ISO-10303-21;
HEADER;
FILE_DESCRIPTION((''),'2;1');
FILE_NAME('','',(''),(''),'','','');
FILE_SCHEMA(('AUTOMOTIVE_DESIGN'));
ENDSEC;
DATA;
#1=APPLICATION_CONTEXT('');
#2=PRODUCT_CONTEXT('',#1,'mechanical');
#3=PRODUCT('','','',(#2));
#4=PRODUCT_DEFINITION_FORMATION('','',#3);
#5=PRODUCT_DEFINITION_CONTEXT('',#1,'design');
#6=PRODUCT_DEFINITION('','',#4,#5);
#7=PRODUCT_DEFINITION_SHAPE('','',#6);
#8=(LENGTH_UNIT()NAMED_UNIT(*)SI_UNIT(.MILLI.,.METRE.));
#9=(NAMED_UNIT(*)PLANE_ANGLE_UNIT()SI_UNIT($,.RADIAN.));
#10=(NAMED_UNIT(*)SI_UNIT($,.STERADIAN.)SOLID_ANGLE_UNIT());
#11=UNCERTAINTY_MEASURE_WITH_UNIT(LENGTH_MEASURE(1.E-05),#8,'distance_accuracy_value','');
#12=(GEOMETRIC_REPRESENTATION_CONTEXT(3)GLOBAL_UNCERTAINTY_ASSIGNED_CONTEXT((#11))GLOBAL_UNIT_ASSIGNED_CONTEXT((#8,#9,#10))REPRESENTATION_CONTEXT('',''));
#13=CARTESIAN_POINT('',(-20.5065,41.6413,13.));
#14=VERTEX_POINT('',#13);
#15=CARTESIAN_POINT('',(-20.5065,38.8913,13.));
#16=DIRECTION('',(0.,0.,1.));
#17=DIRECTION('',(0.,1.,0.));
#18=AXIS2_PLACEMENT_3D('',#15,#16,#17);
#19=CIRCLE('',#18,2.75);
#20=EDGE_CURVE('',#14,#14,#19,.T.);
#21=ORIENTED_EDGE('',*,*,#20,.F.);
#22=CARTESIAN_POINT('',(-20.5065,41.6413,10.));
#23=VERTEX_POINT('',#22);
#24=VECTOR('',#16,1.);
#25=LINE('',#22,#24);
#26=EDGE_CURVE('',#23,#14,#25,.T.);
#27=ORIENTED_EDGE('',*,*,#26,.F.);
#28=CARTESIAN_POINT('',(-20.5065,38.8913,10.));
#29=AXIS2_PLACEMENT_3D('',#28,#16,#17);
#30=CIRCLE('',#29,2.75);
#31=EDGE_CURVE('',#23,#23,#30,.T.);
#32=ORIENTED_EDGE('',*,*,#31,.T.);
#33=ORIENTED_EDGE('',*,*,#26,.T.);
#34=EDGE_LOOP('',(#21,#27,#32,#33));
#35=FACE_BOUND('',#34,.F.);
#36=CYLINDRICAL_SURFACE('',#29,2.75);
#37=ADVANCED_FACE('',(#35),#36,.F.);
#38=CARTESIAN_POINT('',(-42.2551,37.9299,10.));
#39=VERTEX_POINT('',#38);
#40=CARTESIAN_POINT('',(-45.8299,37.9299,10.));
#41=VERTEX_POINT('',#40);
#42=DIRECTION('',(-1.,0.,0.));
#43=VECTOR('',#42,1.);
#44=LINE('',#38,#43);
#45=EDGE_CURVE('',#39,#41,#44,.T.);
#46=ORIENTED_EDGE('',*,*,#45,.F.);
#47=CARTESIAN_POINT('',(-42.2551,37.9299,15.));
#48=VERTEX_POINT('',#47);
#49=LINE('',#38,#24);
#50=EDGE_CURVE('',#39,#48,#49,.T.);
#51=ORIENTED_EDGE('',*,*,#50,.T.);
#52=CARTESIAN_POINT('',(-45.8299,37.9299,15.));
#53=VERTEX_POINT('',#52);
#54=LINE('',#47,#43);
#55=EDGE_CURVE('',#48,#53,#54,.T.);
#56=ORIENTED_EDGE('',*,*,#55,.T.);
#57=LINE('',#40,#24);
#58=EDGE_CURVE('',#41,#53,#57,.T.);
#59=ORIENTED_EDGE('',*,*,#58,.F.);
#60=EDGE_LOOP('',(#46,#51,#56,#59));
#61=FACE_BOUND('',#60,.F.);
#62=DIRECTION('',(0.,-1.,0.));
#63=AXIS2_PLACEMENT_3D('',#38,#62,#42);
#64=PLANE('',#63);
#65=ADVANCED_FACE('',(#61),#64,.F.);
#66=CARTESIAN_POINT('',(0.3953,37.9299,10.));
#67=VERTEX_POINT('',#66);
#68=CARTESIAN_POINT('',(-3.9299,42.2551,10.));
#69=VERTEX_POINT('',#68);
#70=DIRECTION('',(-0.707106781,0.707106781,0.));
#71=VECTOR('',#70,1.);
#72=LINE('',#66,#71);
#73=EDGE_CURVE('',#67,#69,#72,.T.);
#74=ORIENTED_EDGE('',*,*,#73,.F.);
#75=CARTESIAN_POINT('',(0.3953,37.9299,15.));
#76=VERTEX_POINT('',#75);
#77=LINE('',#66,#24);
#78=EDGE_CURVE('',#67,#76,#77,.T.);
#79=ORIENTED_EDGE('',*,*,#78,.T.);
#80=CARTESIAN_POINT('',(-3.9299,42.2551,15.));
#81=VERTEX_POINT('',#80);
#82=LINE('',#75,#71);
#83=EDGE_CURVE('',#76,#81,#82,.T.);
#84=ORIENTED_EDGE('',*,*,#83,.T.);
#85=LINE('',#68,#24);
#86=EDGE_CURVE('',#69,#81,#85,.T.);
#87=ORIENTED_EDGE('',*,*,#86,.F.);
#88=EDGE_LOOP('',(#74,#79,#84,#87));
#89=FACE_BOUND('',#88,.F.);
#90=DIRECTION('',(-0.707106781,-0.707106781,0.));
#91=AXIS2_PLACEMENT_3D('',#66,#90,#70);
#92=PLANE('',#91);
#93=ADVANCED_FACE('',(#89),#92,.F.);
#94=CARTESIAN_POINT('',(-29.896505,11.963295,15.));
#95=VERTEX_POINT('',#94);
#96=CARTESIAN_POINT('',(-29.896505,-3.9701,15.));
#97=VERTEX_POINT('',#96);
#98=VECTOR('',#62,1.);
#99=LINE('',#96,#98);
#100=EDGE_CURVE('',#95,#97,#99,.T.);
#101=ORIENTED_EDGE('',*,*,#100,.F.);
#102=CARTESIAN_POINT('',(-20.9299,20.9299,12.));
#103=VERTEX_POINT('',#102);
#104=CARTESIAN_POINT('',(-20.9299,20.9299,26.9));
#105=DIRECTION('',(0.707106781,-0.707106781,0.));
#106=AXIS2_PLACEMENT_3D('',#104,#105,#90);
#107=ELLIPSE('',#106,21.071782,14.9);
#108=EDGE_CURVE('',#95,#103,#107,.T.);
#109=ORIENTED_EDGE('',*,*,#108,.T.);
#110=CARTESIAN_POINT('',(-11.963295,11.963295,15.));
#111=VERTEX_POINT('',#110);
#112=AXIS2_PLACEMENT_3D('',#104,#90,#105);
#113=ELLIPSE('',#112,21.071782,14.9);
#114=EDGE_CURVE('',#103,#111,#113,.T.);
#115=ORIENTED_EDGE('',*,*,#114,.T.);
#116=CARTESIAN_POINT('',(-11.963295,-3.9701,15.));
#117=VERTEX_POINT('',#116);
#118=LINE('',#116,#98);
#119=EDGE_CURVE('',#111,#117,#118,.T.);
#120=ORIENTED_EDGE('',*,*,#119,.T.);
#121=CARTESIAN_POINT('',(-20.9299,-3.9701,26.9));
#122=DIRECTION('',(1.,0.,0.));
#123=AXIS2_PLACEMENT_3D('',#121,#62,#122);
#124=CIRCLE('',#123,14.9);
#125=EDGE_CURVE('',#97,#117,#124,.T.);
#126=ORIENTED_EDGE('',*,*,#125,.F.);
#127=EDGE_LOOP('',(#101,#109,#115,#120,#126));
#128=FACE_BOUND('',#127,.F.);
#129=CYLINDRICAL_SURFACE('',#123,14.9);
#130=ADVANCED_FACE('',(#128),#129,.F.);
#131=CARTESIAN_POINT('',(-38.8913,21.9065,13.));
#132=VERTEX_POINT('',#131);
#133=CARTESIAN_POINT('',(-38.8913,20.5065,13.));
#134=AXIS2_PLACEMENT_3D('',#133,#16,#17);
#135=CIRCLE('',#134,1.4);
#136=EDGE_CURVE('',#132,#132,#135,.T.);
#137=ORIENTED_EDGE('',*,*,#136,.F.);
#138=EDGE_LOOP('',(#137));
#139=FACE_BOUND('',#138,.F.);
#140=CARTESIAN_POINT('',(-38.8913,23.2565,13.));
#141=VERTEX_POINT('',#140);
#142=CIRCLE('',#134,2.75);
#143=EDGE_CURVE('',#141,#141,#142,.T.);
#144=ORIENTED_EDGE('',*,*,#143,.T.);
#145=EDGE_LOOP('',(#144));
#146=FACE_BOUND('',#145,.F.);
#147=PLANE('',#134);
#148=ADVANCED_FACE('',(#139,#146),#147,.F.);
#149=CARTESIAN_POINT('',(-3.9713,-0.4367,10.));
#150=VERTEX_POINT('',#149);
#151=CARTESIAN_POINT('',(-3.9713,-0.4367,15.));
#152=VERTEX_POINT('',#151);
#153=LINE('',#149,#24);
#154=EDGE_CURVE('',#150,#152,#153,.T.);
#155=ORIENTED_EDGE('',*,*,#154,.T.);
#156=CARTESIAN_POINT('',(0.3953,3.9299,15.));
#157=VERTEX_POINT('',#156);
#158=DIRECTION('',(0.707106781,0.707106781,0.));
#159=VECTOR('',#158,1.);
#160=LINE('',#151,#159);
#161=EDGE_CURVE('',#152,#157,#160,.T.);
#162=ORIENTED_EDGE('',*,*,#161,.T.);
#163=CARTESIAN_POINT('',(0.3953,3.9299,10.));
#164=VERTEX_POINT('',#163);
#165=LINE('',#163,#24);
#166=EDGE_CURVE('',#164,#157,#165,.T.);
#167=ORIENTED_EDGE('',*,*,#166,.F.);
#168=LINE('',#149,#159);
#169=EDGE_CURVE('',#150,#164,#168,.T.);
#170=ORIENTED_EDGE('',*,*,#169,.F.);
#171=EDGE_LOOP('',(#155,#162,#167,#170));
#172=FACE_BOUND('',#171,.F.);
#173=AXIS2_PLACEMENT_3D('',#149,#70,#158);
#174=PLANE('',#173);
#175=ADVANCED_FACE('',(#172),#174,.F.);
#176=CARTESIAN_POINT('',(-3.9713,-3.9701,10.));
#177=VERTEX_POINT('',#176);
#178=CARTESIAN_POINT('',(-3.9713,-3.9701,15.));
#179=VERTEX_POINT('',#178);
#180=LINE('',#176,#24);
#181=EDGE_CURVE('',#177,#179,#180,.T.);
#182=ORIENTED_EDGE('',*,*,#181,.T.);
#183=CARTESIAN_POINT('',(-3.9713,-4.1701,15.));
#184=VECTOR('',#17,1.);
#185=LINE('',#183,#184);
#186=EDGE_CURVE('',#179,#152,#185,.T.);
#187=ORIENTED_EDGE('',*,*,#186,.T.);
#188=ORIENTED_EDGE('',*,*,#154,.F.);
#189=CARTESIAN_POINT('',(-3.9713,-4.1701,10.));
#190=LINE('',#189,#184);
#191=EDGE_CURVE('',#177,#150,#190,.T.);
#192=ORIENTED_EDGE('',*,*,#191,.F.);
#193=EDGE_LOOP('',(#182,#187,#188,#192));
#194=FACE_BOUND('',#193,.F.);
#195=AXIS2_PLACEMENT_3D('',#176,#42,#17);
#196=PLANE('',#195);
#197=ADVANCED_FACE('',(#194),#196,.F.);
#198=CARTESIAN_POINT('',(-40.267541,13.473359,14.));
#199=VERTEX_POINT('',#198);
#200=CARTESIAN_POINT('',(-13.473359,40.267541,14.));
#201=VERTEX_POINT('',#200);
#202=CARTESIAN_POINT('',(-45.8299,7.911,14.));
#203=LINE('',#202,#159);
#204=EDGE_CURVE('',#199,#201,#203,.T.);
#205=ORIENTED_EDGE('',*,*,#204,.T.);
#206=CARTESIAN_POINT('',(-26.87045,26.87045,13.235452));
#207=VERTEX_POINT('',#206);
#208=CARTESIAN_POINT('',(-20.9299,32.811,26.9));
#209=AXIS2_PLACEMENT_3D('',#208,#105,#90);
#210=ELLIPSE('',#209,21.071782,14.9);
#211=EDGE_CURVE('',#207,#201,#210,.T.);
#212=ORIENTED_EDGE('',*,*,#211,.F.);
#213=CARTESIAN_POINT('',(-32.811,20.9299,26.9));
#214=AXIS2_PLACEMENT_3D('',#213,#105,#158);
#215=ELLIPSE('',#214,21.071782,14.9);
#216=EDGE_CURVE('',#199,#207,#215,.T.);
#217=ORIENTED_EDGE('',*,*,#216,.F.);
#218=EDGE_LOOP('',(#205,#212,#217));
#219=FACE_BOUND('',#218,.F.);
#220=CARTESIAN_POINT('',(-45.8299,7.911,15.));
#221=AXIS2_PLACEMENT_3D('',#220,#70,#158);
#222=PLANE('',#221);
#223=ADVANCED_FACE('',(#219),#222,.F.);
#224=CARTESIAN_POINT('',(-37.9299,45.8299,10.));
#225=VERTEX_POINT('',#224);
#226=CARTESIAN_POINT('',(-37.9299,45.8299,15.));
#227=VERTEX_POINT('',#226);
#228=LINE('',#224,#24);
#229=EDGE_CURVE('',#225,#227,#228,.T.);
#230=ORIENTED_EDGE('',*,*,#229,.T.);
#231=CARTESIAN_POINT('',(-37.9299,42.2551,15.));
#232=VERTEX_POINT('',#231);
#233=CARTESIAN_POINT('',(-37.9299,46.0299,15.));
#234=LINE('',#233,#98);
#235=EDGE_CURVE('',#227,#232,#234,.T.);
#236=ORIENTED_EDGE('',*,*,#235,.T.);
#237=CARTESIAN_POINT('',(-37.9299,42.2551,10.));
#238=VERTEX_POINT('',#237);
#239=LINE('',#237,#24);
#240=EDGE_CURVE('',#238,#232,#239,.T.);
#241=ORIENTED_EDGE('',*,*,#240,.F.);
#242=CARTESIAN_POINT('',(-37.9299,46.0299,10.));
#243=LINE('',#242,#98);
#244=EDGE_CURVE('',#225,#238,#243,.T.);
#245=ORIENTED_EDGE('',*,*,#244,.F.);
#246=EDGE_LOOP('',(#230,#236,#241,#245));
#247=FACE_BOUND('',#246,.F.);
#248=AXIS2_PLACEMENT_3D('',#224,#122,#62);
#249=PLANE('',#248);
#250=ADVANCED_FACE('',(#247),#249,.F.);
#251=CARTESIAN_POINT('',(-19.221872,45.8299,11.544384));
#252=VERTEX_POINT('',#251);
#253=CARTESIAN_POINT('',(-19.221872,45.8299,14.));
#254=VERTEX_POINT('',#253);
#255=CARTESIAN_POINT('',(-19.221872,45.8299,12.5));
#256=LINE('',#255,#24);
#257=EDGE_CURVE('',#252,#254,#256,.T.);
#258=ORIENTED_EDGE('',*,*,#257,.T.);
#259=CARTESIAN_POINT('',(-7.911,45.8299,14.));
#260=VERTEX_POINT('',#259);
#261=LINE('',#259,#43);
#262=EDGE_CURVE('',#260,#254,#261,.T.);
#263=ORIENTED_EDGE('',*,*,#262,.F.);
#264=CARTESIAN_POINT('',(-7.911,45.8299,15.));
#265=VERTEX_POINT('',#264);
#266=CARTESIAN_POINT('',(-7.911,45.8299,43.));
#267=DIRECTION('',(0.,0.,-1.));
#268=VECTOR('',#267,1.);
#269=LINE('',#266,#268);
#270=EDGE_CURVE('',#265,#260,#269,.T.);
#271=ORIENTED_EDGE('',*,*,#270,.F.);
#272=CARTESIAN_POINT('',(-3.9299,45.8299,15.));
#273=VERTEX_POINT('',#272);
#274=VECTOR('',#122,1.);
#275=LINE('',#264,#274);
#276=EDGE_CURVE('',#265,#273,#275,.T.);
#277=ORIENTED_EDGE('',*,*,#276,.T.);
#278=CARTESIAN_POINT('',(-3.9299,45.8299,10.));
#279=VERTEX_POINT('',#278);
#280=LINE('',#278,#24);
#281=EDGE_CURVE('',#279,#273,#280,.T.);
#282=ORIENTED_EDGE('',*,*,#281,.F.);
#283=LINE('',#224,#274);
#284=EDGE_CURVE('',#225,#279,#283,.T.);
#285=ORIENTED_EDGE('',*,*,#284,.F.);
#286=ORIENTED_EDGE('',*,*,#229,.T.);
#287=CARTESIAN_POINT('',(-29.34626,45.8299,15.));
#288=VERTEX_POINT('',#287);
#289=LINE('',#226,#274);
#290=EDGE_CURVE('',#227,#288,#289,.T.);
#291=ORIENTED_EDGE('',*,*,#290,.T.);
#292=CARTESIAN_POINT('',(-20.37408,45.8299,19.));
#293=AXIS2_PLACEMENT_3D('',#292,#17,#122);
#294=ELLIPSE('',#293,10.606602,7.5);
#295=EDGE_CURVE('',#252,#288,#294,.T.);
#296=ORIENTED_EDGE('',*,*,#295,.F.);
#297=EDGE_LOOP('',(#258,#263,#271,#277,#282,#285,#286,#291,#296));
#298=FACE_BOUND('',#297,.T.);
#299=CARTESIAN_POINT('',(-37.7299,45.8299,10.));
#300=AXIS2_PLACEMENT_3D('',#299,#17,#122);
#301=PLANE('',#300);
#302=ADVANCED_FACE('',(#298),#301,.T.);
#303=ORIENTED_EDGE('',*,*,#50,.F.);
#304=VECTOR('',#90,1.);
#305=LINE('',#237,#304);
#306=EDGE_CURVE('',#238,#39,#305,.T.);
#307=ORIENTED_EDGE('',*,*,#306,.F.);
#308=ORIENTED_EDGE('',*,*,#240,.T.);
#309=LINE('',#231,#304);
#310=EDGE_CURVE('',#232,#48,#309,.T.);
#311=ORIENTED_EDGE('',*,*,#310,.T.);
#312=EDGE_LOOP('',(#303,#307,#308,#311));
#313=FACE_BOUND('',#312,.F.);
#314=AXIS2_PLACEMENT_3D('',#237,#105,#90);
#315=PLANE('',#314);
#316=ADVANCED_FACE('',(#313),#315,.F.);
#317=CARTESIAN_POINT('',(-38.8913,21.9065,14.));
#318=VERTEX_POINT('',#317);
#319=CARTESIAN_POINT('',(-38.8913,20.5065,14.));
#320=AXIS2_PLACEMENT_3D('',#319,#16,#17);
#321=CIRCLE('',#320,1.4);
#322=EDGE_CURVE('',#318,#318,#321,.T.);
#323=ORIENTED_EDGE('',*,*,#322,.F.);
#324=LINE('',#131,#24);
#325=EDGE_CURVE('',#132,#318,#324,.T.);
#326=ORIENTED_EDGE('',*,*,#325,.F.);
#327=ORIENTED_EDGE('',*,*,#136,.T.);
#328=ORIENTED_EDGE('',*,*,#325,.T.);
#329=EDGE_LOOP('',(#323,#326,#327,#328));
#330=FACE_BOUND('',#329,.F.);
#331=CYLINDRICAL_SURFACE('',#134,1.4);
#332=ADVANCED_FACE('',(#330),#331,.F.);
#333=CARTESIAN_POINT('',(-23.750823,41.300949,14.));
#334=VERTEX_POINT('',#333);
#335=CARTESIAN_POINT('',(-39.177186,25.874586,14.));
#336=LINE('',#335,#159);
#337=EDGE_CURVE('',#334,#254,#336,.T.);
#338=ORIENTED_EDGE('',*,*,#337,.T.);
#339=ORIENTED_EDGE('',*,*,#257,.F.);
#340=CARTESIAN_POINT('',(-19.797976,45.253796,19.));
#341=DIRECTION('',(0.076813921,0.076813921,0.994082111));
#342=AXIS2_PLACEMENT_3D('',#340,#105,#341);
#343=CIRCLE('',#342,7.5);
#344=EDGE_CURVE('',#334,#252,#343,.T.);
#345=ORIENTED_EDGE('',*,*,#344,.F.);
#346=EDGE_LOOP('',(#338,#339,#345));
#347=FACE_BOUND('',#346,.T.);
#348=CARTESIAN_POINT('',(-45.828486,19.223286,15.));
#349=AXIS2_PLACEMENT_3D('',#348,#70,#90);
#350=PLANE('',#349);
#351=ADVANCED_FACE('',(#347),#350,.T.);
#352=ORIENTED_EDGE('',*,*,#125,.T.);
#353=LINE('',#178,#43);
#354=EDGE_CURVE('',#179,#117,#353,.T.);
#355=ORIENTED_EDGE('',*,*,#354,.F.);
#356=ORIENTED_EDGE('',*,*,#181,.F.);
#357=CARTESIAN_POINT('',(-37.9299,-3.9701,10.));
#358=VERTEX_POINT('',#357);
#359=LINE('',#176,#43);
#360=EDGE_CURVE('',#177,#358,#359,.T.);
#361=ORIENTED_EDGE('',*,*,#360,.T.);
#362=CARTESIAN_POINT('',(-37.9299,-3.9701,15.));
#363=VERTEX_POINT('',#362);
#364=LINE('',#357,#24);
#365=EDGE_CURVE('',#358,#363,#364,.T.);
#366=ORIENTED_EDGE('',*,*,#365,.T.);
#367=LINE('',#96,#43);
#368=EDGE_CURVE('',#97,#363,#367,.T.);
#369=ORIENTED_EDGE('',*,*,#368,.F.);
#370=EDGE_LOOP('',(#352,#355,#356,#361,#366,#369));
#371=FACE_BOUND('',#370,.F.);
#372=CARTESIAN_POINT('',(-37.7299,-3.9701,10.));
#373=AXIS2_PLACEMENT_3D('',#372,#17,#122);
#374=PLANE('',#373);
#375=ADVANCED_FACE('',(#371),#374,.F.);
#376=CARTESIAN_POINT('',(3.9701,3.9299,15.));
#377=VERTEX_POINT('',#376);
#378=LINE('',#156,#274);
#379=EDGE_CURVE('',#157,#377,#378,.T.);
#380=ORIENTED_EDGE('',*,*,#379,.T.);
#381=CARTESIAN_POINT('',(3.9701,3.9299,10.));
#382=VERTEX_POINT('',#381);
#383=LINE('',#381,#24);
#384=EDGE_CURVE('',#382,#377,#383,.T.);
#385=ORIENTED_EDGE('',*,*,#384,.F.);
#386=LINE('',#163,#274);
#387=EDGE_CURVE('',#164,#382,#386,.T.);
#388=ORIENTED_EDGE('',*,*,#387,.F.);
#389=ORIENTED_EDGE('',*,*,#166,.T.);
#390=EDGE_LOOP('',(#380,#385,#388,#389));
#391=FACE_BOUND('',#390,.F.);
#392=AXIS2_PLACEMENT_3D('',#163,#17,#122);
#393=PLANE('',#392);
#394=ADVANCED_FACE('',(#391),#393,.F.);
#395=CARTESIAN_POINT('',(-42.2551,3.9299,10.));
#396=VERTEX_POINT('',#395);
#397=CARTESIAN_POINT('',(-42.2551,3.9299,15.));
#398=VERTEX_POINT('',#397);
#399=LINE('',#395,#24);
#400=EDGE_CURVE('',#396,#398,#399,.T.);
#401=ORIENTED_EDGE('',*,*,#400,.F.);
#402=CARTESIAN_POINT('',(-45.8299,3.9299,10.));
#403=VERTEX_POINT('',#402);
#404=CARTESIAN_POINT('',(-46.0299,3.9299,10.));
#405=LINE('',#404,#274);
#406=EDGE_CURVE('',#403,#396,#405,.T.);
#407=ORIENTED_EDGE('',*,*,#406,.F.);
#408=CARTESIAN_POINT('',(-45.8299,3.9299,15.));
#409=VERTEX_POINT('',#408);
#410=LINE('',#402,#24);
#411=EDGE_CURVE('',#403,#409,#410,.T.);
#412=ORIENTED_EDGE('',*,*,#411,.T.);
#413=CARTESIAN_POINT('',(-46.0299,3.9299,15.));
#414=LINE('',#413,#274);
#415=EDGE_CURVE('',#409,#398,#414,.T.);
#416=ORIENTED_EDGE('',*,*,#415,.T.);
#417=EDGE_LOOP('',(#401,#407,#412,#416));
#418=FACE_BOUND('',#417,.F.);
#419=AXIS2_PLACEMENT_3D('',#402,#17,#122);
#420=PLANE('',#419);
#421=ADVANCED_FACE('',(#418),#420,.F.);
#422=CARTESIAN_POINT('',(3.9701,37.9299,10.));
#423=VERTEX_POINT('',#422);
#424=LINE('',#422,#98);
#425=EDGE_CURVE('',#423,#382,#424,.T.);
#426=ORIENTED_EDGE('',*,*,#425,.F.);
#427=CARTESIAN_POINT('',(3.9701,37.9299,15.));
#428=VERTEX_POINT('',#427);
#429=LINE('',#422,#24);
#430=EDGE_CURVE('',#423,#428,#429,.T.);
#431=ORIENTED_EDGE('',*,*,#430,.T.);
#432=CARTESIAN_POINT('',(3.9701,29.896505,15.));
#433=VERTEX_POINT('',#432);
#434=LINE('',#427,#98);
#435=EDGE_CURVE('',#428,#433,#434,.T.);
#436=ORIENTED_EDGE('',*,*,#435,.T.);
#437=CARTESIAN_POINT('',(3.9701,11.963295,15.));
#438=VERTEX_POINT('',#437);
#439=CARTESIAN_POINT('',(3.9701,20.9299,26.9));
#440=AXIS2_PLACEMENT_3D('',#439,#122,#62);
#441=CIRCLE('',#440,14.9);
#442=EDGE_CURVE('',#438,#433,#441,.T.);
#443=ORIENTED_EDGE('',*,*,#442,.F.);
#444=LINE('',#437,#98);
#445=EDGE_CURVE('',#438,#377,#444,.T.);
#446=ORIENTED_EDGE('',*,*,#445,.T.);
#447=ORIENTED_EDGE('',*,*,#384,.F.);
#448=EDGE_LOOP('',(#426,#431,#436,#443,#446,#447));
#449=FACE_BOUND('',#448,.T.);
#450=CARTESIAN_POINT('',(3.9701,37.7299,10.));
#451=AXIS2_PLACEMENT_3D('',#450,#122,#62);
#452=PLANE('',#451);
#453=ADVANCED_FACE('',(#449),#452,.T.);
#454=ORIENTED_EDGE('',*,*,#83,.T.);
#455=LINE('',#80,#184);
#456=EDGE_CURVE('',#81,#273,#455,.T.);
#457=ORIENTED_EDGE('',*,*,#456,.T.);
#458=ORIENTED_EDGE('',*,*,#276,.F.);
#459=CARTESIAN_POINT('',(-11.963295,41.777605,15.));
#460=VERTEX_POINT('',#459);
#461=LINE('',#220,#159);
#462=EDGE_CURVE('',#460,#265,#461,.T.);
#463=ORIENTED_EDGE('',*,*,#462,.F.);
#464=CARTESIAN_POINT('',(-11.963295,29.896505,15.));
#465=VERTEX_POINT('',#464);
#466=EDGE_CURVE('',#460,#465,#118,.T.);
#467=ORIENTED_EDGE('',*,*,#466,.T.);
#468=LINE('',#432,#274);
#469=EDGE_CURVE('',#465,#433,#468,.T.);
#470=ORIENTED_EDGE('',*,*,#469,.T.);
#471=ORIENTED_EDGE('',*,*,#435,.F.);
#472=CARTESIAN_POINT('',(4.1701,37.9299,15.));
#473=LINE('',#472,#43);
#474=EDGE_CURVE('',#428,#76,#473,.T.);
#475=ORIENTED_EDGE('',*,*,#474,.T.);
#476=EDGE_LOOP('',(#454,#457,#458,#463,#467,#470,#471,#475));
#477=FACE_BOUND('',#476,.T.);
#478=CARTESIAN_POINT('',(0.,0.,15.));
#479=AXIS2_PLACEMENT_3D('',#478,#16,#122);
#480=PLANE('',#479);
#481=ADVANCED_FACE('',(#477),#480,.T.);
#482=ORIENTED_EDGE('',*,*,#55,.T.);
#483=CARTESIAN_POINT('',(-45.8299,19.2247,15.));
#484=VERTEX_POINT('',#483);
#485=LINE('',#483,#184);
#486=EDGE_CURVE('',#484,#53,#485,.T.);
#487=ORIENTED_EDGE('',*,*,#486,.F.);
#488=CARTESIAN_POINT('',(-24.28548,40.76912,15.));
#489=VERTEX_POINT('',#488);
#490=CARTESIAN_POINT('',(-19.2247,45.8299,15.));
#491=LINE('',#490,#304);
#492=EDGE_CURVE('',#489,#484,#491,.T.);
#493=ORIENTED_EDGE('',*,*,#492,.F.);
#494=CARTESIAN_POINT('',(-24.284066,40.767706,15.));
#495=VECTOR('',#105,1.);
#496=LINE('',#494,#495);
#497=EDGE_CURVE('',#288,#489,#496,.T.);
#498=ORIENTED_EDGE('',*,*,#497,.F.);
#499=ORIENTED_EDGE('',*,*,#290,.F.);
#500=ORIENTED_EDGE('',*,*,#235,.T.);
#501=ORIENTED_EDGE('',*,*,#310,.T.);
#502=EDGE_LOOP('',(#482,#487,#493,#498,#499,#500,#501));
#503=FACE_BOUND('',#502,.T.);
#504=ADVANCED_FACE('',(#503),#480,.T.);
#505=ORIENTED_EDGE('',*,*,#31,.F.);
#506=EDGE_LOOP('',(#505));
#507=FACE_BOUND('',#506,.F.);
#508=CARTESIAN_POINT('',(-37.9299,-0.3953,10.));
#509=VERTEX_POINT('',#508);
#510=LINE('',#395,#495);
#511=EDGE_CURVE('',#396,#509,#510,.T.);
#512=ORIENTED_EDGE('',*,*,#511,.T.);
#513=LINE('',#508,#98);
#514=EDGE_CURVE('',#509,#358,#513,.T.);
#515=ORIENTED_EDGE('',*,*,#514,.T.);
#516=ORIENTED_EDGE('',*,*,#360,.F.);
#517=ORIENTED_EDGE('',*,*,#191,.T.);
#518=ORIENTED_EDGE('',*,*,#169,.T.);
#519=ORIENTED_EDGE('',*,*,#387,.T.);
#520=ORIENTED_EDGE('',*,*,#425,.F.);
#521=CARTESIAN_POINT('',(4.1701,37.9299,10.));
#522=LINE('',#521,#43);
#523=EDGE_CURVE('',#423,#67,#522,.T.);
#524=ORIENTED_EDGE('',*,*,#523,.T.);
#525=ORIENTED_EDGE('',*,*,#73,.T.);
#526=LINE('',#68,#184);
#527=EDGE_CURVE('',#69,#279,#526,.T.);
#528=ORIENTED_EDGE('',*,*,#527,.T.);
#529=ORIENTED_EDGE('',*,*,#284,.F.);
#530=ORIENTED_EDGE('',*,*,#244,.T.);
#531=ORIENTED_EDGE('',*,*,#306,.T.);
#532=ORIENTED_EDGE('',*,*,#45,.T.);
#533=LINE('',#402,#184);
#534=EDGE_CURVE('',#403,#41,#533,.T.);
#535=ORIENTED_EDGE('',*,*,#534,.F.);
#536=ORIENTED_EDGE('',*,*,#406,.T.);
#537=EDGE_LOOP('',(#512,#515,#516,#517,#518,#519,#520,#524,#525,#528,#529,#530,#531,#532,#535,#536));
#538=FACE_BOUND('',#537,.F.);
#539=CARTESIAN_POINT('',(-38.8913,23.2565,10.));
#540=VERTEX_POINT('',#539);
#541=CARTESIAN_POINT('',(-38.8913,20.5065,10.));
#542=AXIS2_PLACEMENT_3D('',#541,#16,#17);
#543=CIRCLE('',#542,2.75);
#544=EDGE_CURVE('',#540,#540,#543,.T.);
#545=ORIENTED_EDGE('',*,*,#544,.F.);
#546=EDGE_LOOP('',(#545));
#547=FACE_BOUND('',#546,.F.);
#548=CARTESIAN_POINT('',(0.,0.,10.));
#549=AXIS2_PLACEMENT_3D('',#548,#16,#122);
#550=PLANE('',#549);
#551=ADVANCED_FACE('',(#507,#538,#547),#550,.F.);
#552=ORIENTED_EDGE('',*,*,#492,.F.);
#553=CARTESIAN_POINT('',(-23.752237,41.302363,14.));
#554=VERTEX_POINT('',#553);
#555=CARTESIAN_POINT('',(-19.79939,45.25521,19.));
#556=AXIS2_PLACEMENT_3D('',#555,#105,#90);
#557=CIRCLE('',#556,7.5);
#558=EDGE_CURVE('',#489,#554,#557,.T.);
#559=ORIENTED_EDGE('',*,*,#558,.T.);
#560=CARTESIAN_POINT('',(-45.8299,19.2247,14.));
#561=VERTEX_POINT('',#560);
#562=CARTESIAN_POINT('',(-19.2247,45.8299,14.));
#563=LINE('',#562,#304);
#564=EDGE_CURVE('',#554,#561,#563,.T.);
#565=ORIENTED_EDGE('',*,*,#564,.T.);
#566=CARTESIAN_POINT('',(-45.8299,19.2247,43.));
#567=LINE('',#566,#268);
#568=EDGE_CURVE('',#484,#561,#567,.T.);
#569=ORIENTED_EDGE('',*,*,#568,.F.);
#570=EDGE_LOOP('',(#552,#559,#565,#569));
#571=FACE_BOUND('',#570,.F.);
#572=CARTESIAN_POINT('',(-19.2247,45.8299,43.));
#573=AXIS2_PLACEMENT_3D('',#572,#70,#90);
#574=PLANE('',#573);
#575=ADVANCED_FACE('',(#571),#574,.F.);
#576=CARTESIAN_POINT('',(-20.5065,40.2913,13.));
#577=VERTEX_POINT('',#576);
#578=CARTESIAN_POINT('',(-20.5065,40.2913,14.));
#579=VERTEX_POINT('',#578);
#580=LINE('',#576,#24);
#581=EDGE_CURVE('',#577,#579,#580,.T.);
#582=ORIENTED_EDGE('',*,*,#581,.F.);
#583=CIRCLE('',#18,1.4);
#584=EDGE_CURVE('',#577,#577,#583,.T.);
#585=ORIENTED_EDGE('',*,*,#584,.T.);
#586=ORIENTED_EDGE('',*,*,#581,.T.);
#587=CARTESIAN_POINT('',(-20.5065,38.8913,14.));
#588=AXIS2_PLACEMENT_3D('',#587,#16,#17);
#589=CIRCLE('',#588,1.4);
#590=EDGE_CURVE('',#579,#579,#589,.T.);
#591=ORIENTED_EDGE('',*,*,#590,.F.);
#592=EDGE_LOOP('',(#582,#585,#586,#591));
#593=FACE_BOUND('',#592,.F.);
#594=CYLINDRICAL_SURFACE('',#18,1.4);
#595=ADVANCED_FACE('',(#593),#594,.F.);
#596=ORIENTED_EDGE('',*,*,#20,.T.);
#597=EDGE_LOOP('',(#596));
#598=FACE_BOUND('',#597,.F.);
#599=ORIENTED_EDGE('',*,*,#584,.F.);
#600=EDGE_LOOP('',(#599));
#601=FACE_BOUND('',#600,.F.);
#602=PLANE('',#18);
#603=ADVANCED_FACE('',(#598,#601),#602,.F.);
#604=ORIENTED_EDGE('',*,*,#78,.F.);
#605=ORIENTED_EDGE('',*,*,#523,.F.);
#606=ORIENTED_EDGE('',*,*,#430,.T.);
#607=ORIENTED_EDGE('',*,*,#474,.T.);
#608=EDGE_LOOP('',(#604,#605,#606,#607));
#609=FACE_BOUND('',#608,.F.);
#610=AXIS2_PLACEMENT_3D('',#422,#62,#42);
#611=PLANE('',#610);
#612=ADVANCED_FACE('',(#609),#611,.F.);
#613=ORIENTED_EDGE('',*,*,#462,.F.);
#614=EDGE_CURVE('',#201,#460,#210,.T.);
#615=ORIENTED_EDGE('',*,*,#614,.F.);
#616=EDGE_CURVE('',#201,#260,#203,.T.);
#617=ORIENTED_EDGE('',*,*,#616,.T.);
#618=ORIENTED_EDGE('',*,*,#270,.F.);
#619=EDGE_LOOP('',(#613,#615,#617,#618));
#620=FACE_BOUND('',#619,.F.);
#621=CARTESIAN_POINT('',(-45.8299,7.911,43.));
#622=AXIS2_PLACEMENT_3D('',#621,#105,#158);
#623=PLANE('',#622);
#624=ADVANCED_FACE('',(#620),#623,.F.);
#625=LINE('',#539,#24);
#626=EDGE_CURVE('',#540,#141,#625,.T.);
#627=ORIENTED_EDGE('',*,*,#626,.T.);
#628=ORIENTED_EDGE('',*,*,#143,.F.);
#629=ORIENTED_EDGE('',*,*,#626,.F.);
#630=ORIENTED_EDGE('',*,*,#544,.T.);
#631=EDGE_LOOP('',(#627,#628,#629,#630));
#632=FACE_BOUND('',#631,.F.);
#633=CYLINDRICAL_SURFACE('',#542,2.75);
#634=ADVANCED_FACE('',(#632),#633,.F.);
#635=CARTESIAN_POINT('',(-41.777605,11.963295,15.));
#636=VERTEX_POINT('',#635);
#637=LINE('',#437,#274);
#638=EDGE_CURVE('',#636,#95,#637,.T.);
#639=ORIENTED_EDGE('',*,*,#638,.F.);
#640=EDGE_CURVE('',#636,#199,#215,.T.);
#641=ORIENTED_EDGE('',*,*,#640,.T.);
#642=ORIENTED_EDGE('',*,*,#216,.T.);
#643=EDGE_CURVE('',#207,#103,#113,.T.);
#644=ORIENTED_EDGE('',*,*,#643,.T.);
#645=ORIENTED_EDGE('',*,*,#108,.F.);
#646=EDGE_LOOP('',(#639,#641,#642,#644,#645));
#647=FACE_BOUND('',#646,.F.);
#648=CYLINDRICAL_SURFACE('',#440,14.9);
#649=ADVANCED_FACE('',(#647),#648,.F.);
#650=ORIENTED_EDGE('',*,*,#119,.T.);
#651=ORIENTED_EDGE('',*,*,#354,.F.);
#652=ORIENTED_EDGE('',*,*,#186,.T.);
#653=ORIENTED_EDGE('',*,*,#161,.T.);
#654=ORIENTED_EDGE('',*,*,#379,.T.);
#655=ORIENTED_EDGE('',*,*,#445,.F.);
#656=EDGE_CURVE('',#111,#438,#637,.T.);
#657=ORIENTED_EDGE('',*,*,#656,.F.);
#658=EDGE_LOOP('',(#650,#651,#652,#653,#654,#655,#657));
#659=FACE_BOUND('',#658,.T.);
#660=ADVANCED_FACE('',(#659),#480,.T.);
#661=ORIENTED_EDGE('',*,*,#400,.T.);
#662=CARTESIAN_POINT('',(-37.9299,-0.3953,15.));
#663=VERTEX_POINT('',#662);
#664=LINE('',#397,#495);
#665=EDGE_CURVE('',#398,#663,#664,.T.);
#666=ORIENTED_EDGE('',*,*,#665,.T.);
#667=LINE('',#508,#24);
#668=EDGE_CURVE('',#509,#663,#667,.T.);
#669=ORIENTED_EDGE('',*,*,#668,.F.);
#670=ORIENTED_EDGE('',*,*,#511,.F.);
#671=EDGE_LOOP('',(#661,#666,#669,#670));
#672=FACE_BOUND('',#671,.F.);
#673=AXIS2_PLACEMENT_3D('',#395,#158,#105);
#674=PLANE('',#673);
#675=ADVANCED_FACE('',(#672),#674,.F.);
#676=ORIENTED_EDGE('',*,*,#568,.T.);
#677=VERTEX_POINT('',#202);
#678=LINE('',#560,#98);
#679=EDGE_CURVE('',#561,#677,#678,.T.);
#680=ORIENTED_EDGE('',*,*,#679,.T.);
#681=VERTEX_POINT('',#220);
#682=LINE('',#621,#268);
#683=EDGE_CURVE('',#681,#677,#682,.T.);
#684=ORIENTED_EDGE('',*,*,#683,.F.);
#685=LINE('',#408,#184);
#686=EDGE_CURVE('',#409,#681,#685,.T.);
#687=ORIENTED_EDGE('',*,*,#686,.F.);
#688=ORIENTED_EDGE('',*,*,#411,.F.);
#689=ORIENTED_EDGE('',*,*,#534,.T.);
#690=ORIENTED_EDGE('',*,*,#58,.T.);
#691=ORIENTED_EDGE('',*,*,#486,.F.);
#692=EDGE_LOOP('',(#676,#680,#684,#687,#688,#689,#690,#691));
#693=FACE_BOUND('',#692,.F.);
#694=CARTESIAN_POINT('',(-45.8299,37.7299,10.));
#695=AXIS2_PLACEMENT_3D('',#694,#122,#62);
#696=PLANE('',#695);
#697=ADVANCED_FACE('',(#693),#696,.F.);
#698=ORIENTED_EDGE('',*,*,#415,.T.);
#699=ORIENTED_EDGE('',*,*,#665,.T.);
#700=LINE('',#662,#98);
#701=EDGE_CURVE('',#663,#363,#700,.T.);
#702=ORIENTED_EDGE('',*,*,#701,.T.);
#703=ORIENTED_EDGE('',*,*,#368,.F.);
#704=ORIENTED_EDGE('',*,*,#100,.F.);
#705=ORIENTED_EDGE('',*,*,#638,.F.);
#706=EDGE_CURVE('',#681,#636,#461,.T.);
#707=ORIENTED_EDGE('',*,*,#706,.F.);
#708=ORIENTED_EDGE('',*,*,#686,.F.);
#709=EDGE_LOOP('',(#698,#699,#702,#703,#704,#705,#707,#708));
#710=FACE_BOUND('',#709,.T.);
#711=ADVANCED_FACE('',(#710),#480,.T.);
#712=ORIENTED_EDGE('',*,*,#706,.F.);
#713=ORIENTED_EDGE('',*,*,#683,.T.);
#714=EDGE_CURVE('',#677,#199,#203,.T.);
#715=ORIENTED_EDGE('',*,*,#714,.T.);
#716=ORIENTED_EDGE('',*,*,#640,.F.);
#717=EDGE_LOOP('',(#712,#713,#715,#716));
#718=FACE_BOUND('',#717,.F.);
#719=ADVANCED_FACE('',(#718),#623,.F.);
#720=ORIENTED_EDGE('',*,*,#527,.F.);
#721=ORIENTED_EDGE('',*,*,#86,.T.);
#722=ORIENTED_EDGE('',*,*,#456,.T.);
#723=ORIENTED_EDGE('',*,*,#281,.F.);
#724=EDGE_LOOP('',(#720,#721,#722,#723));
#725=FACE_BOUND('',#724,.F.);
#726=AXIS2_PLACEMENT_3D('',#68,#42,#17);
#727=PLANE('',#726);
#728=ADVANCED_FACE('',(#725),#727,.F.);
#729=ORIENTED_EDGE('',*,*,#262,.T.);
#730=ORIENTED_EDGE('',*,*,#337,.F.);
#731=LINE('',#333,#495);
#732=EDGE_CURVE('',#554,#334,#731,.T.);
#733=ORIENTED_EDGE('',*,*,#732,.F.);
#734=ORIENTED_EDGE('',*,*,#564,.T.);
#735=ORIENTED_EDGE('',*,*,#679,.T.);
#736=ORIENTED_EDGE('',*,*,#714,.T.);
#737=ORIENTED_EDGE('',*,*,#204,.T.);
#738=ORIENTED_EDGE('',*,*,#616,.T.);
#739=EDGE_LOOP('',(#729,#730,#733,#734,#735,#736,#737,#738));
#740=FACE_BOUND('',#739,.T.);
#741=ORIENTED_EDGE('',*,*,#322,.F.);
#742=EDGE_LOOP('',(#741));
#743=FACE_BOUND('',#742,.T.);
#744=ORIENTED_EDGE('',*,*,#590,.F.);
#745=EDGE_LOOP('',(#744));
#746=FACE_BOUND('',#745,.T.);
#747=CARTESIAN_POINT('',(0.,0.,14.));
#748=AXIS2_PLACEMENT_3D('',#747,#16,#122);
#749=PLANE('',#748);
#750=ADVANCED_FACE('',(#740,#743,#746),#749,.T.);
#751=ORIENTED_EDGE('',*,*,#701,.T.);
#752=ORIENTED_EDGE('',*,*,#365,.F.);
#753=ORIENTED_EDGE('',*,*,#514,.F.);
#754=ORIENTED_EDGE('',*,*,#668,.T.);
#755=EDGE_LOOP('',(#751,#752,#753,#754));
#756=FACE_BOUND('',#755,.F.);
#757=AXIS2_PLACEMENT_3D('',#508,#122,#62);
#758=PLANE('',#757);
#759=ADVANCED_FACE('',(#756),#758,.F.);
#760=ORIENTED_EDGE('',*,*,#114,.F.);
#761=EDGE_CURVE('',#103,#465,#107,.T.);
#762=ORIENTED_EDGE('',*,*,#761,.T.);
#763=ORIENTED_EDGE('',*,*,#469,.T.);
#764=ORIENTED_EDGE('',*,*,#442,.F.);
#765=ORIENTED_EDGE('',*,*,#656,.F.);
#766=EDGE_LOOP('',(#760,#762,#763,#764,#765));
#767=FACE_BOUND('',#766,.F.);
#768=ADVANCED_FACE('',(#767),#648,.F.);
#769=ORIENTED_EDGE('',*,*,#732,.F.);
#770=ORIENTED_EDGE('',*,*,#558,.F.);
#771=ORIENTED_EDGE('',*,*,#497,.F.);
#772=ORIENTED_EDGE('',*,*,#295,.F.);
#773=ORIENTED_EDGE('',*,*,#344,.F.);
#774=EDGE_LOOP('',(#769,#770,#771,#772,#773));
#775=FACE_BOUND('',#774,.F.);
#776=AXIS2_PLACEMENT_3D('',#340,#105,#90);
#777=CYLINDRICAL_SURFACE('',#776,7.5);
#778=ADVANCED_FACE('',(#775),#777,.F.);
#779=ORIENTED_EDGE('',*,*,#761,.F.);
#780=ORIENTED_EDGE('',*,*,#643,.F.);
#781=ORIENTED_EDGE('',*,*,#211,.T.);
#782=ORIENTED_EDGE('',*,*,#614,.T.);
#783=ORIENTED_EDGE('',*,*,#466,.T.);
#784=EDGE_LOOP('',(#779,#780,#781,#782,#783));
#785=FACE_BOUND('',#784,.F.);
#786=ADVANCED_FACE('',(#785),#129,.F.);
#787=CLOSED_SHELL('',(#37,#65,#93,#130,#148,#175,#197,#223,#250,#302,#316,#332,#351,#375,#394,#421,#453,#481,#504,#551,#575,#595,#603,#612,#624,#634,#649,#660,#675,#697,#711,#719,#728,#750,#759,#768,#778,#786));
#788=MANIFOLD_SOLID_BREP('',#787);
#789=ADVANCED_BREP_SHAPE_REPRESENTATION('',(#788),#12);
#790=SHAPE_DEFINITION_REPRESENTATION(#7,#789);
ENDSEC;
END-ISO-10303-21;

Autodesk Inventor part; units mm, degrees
ref_plane "Work Plane1" through (0, 0, 10) normal (0, 0, 1) x (1, 0, 0)
sketch "Sketch1" plane through (0, 0, 10) normal (0, 0, 1) x (1, 0, 0)
  line L0 (-4.0299, -0.3538) -> (-2.2322, 1.4439) construction
  arc A0 (-1.4439, 2.2322) -> (-2.2322, 1.4439) centre (-0.9299, 0.9299) ccw construction
  line L1 (-1.4439, 2.2322) -> (0.3538, 4.0299) construction
  line L2 (-37.8299, 42.8299) -> (-37.8299, 37.8299) construction
  line L3 (-37.8299, 37.8299) -> (-42.9208, 37.8299) construction
  line L4 (-37.8299, 42.2137) -> (-37.8299, 45.8299) construction
  line L5 (-37.8299, 45.8299) -> (-4.0299, 45.8299) construction
  line L6 (-4.0299, 45.8299) -> (-4.0299, 42.2137) construction
  line L7 (-4.0299, 4.0299) -> (0.3538, 4.0299) projected
  circle A1 centre (-20.9299, 20.9299) radius 17.5 projected
  line L8 (-20.9299, 58.9723) -> (17.1124, 20.9299) construction
  line L9 (17.1124, 20.9299) -> (-20.9299, -17.1124) construction
  line L10 (-20.9299, -17.1124) -> (-58.9723, 20.9299) construction
  line L11 (-58.9723, 20.9299) -> (-20.9299, 58.9723) construction
  line L12 (-20.9299, 58.9723) -> (-20.9299, -17.1124) construction
  line L13 (17.1124, 20.9299) -> (-58.9723, 20.9299) construction
  line L14 (-20.9299, 58.9723) -> (32.8701, 58.9723) construction
  line L15 (-43.4299, 43.4299) -> (1.5701, 43.4299) construction
  line L16 (1.5701, 43.4299) -> (1.5701, -1.5701) construction
  line L17 (1.5701, -1.5701) -> (-43.4299, -1.5701) construction
  line L18 (-43.4299, -1.5701) -> (-43.4299, 43.4299) construction
  line L19 (-43.4299, 43.4299) -> (1.5701, -1.5701) construction
  line L20 (1.5701, 43.4299) -> (-43.4299, -1.5701) construction
  line L21 (-43.4299, 5.3876) -> (-43.4299, 36.4723)
  line L22 (-43.4299, 36.4723) -> (-36.4723, 43.4299)
  line L23 (-36.4723, 43.4299) -> (-5.3876, 43.4299)
  line L24 (-5.3876, 43.4299) -> (1.5701, 36.4723)
  line L25 (1.5701, 36.4723) -> (1.5701, 5.3876)
  line L26 (1.5701, 5.3876) -> (-5.3876, -1.5701)
  line L27 (-5.3876, -1.5701) -> (-36.4723, -1.5701)
  line L28 (-36.4723, -1.5701) -> (-43.4299, 5.3876)
  line L29 (-4.0299, 42.2137) -> (-37.8299, 42.2137) projected
  line L30 (-4.0299, -0.3538) -> (-4.0299, 4.0299) projected
  circle A2 centre (-20.9299, 20.9299) radius 1.4
  line L31 (-10.9299, 10.9299) -> (-30.9299, 10.9299) construction
  line L32 (-30.9299, 10.9299) -> (-30.9299, 30.9299) construction
  line L33 (-30.9299, 30.9299) -> (-10.9299, 30.9299) construction
  line L34 (-10.9299, 30.9299) -> (-10.9299, 10.9299) construction
  line L35 (-10.9299, 10.9299) -> (-30.9299, 30.9299) construction
  line L36 (-30.9299, 10.9299) -> (-10.9299, 30.9299) construction
  circle A3 centre (-30.9299, 30.9299) radius 1.4
  circle A4 centre (-30.9299, 10.9299) radius 1.4
  circle A5 centre (-10.9299, 10.9299) radius 1.4
  line L37 (-45.8299, 37.8299) -> (-42.0723, 37.8299) construction
  line L38 (-42.1723, 37.7299) -> (-45.8299, 37.7299)
  line L39 (-45.8299, 37.7299) -> (-45.8299, 4.1299)
  line L40 (-45.8299, 4.1299) -> (-42.1723, 4.1299)
  line L41 (-42.1723, 4.1299) -> (-42.1723, 37.7299)
  line L42 (-45.8299, 4.0299) -> (-42.0723, 4.0299) construction
  line L43 (-45.8299, 37.8299) -> (-42.0723, 37.8299) projected
  line L44 (-37.7299, 45.8299) -> (-4.1299, 45.8299)
  line L45 (-4.1299, 45.8299) -> (-4.1299, 42.1723)
  line L46 (-4.1299, 42.1723) -> (-37.7299, 42.1723)
  line L47 (-37.7299, 42.1723) -> (-37.7299, 45.8299)
  line L48 (0.4701, 37.8299) -> (0.4701, 4.0299) construction
  line L49 (0.4701, 4.0299) -> (3.9701, 4.0299) construction
  line L50 (3.9701, 37.8299) -> (3.9701, 4.0299) construction
  line L51 (0.4701, 37.8299) -> (3.9701, 37.8299) construction
  line L52 (-45.8299, -3.9701) -> (-4.0299, -3.9701) construction
  line L53 (0.3124, 37.7299) -> (3.9701, 37.7299)
  line L54 (3.9701, 37.7299) -> (3.9701, 4.1299)
  line L55 (3.9701, 4.1299) -> (0.3124, 4.1299)
  line L56 (0.3124, 4.1299) -> (0.3124, 37.7299)
  line L57 (-4.1713, -0.3538) -> (-37.7299, -0.3538)
  line L58 (-37.7299, -0.3538) -> (-37.7299, -3.9701)
  line L59 (-37.7299, -3.9701) -> (-4.1713, -3.9701)
  line L60 (-4.1713, -3.9701) -> (-4.1713, -0.3538)
  point P0 (-37.8299, 4.0299)
  dimension "d18" = 53.8
  dimension "d19" = 45
  dimension "d20" = 53.8
  dimension "d21" = 45
  dimension "d22" = 45
  dimension "d30" = 20
  dimension "d31" = 20
  dimension "d32" = 2.8
  dimension "d33" = 2.8
  dimension "d34" = 2.8
  dimension "d35" = 2.8
  dimension "d36" = 0.1
  dimension "d37" = 0.1
  dimension "d38" = 0.1
  dimension "d39" = 0.1
extrude "Extrusion1" add sketch "Sketch1" along normal blind 5 contours L30 L26 L57 L28 L41 L22 L46 L24 L56 L7 | L7 L26 L30 | L56 L24 L25 L26 | L26 L25 L24 L53 L54 L55 | L60 L59 L58 L57 L28 L27 L26 | L26 L27 L28 L57 | L46 L22 L29 L24 | L24 L29 L45 | L40 L39 L38 L22 L21 L28 | L28 L21 L22 L41 | L29 L22 L23 L24 | L24 L23 L22 L29 L47 L44 L45 | L47 L29 L22 | A1 | A2 | A3 | A4 | A5
sketch "Sketch4" plane through (0, 0, 15) normal (0, 0, 1) x (1, 0, 0)
  line L0 (-37.7299, 42.1723) -> (-42.1723, 37.7299) projected
  line L1 (-42.1723, 37.7299) -> (-45.8299, 37.7299) projected
  line L2 (-45.8299, 37.7299) -> (-45.8299, 4.1299) projected
  line L3 (-45.8299, 4.1299) -> (-42.1723, 4.1299) projected
  line L4 (-42.1723, 4.1299) -> (-37.6885, -0.3538) projected
  line L5 (-37.6885, -0.3538) -> (-37.7299, -0.3538) projected
  line L6 (-37.7299, -0.3538) -> (-37.7299, -3.9701) projected
  line L7 (-37.7299, -3.9701) -> (-4.1713, -3.9701) projected
  line L8 (-4.1713, -3.9701) -> (-4.1713, -0.3538) projected
  line L9 (-4.1713, -0.3538) -> (0.3124, 4.1299) projected
  line L10 (0.3124, 4.1299) -> (3.9701, 4.1299) projected
  line L11 (3.9701, 4.1299) -> (3.9701, 37.7299) projected
  line L12 (3.9701, 37.7299) -> (0.3124, 37.7299) projected
  line L13 (0.3124, 37.7299) -> (-4.1299, 42.1723) projected
  line L14 (-4.1299, 42.1723) -> (-4.1299, 45.8299) projected
  line L15 (-4.1299, 45.8299) -> (-37.7299, 45.8299) projected
  line L16 (-37.7299, 45.8299) -> (-37.7299, 42.1723) projected
  line L17 (-45.8299, 37.7299) -> (-45.8299, 4.1299) projected
  line L18 (-45.8299, 7.911) -> (-7.911, 45.8299)
  line L19 (-45.8299, 7.911) -> (7.7955, 7.911) construction
  line L20 (-7.911, 45.8299) -> (-19.2247, 45.8299)
  line L21 (-4.1299, 45.8299) -> (-37.7299, 45.8299) projected
  line L22 (-19.2247, 45.8299) -> (-45.8299, 19.2247)
  line L23 (-45.8299, 7.911) -> (-45.8299, 19.2247)
  circle A0 centre (-40.9299, 0.9299) radius 1.1933 projected
  circle A1 centre (-0.9299, 40.9299) radius 1.4 projected
  line L24 (-40.9299, 0.9299) -> (-0.9299, 40.9299)
  line L25 (0.3124, 37.7299) -> (-4.1299, 42.1723) projected
  point P0 (0, 0)
  dimension "d40" = 45
  dimension "d41" = 8
extrude "Extrusion4" add sketch "Sketch4" along normal blind 28 contours L15 L18 L2 L22
sketch "Sketch5" plane through (-45.8299, 19.2247, 15) normal (-0.7071068, 0.7071068, 0) x (-0.7071068, -0.7071068, 0)
  line L0 (0, 0) -> (-37.6254, 0) projected
  line L1 (0, 0) -> (0, 28) projected
  line L2 (-37.6254, 28) -> (0, 28) projected
  line L3 (-37.6254, 0) -> (-37.6254, 28) projected
  circle A0 centre (-18.8127, 9.1873) radius 18.8127
  line L4 (-6.8127, 24) -> (-36.8127, 24) construction
  line L5 (-36.8127, 24) -> (-36.8127, 4) construction
  line L6 (-36.8127, 4) -> (-6.8127, 4) construction
  line L7 (-6.8127, 4) -> (-6.8127, 24) construction
  line L8 (-6.8127, 24) -> (-36.8127, 4) construction
  line L9 (-36.8127, 24) -> (-6.8127, 4) construction
  point P0 (-18.8127, -15)
  point P1 (-21.8127, 14)
  dimension "d44" = 30
  dimension "d45" = 20
hole "Hole1" at (-19.7994, 45.2552, 39) at (-19.7994, 45.2552, 19) at (-41.0126, 24.042, 39) at (-30.406, 34.6486, 29) direction (0.7071068, -0.7071068, 0) diameter 2.8 depth 12
sketch "Sketch6" plane through (-37.7299, -3.9701, 10) normal (0, -1, 0) x (1, 0, 0)
  circle A0 centre (-3.2, 36.9) radius 1.45 projected
  circle A1 centre (36.8, 36.9) radius 1.45 projected
  line L0 (-6.1, 0) -> (-6.1, 39.8) projected
  line L1 (-0.1, 0) -> (-6.1, 0) projected
  line L2 (-0.1, 33.8) -> (-0.1, 0) projected
  line L3 (33.7, 33.8) -> (-0.1, 33.8) projected
  line L4 (33.7, 33.8) -> (33.7, 0) projected
  line L5 (39.7, 0) -> (33.7, 0) projected
  line L6 (39.7, 39.8) -> (39.7, 0) projected
  line L7 (-6.1, 39.8) -> (39.7, 39.8) projected
  circle A2 centre (16.8, 16.9) radius 16.9
  circle A3 centre (16.8, 16.9) radius 14.9
  line L8 (-0.1, 16.9) -> (-0.1, 0)
  line L9 (0, 0) -> (33.5586, 0) projected
  line L10 (0.0414, 0) -> (-4.4423, 0) projected
  line L11 (33.5586, 0) -> (0.0414, 0)
  line L12 (33.7, 16.9) -> (33.5586, 0)
  point P0 (37.7299, -10)
  dimension "d53" = 2
extrude "Extrusion5" cut sketch "Sketch6" against normal up to surface contours A3 surface through (-45.8299, 7.911, 15) normal (0.7071068, -0.7071068, 0)
ref_plane "Work Plane3" through (3.9701, 45.8299, 26) normal (1, 0, 0) x (0, -1, 0)
sketch "Sketch7" plane through (3.9701, 45.8299, 26) normal (1, 0, 0) x (0, -1, 0)
  line L0 (41.8, -17.8) -> (41.8, 16) projected
  line L1 (8, -17.8) -> (41.8, -17.8) projected
  line L2 (8, -17.8) -> (8, 16) projected
  circle A0 centre (24.9, -0.9) radius 16.9
  circle A1 centre (24.9, -0.9) radius 14.9
  point P0 (45.8299, 26)
  dimension "d56" = 2
ref_plane "Work Plane4" through (-34.8055, 8.3289, 16.6138) normal (0.7071068, -0.7071068, 0) x (0.7071068, 0.7071068, 0)
extrude "Extrusion6" cut sketch "Sketch7" against normal up to surface contours A1 surface through (-45.8299, 7.911, 15) normal (0.7071068, -0.7071068, 0)
sketch "Sketch8" plane through (-45.8299, 19.2247, 15) normal (-0.7071068, 0.7071068, 0) x (-0.7071068, -0.7071068, 0)
  arc A0 (-37.6254, 2.8601) -> (-37.6254, 5.1399) centre (-36.8127, 4) ccw projected
  circle A1 centre (-36.8127, 4) radius 7.5
  point P0 (-18.8127, -15)
  dimension "d59" = 15
extrude "Extrusion7" cut sketch "Sketch8" along normal blind 10
sketch "Sketch9" plane through (0, 0, 10) normal (0, 0, -1) x (-1, 0, 0)
  line L0 (45.8299, 19.2247) -> (24.2855, 40.7692) projected
  line L1 (41.7776, 11.9633) -> (26.8705, 26.8705) projected
  line L2 (26.8705, 26.8705) -> (11.9633, 41.7776) projected
  line L3 (19.2247, 45.8299) -> (24.2855, 40.7692) projected
  line L4 (7.911, 45.8299) -> (11.9633, 41.7776) projected
  line L5 (41.7776, 11.9633) -> (45.8299, 7.911) projected
  line L6 (15.1325, 38.6084) -> (20.7894, 44.2653) projected
  line L7 (13.1526, 40.5883) -> (18.3942, 45.8299) projected
  line L8 (34.3658, 19.3751) -> (40.0227, 25.032) projected
  line L9 (36.3457, 17.3952) -> (42.0026, 23.0521) projected
  circle A0 centre (20.5065, 38.8913) radius 1.4
  line L10 (25.7391, 28.0018) -> (31.396, 33.6587) projected
  line L11 (31.396, 33.6587) -> (25.7391, 28.0018)
  line L12 (26.8705, 26.8705) -> (32.5273, 32.5273)
  circle A1 centre (38.8913, 20.5065) radius 1.4
  point P0 (0, 0)
  point P1 (34.7528, 24.7491)
  dimension "d62" = 2.8
hole "Hole2" at (-20.5065, 38.8913, 10) at (-38.8913, 20.5065, 10) direction (0, 0, 1) diameter 2.8 depth 12 counterbore diameter 5.5 counterbore depth 3
sketch "Sketch13" plane through (0, 0, 43) normal (0, 0, 1) x (1, 0, 0)
  line L0 (-7.911, 45.8299) -> (-19.2247, 45.8299) projected
  line L1 (-19.2247, 45.8299) -> (-45.8299, 19.2247) projected
  line L2 (-45.8299, 19.2247) -> (-45.8299, 7.911) projected
  line L3 (-45.8299, 7.911) -> (-7.911, 45.8299) projected
  point P0 (0, 0)
extrude "Extrusion10" cut sketch "Sketch13" against normal blind 29
sketch "Sketch14" plane through (0, 0, 10) normal (0, 0, -1) x (-1, 0, 0)
  circle A0 centre (20.5065, 38.8913) radius 2.75 construction
  circle A1 centre (38.8913, 20.5065) radius 2.75 construction
  line L0 (42.1723, 37.7299) -> (37.7299, 42.1723) projected
  line L1 (37.7299, 45.8299) -> (37.7299, 42.1723) projected
  line L2 (4.1299, 45.8299) -> (37.7299, 45.8299) construction
  line L3 (4.1299, 42.1723) -> (4.1299, 45.8299) projected
  line L4 (4.1299, 42.1723) -> (-0.3124, 37.7299) projected
  line L5 (-3.9701, 37.7299) -> (-0.3124, 37.7299) projected
  line L6 (-3.9701, 4.1299) -> (-3.9701, 37.7299) construction
  line L7 (-0.3124, 4.1299) -> (-3.9701, 4.1299) projected
  line L8 (-0.3124, 4.1299) -> (4.1713, -0.3538) projected
  line L9 (4.1713, -3.9701) -> (4.1713, -0.3538) projected
  line L10 (37.7299, -3.9701) -> (4.1713, -3.9701) construction
  line L11 (37.7299, -0.3538) -> (37.7299, -3.9701) projected
  line L12 (37.6885, -0.3538) -> (37.7299, -0.3538) projected
  line L13 (37.6885, -0.3538) -> (42.1723, 4.1299) projected
  line L14 (45.8299, 4.1299) -> (42.1723, 4.1299) projected
  line L15 (45.8299, 37.7299) -> (45.8299, 4.1299) construction
  line L16 (42.1723, 37.7299) -> (45.8299, 37.7299) projected
  line L17 (3.9713, -4.1701) -> (3.9713, -0.4367)
  line L18 (3.9713, -0.4367) -> (-0.3953, 3.9299)
  line L19 (-0.3953, 3.9299) -> (-4.1701, 3.9299)
  line L20 (-4.1701, 3.9299) -> (-4.1701, 37.9299) construction
  line L21 (-4.1701, 37.9299) -> (-0.3953, 37.9299)
  line L22 (-0.3953, 37.9299) -> (3.9299, 42.2551)
  line L23 (3.9299, 42.2551) -> (3.9299, 46.0299)
  line L24 (3.9299, 46.0299) -> (37.9299, 46.0299) construction
  line L25 (37.9299, 46.0299) -> (37.9299, 42.2551)
  line L26 (37.9299, 42.2551) -> (42.2551, 37.9299)
  line L27 (42.2551, 37.9299) -> (46.0299, 37.9299)
  line L28 (46.0299, 37.9299) -> (46.0299, 3.9299) construction
  line L29 (46.0299, 3.9299) -> (42.2551, 3.9299)
  line L30 (42.2551, 3.9299) -> (37.9299, -0.3953)
  line L31 (37.9299, -0.3953) -> (37.9299, -4.1701)
  line L32 (37.9299, -4.1701) -> (3.9713, -4.1701) construction
  line L33 (45.8299, 4.1299) -> (42.1723, 4.1299) projected
  line L34 (45.8299, 4.1299) -> (45.8299, 3.9299)
  line L35 (37.7299, -0.3538) -> (37.7299, -3.9701) projected
  line L36 (37.7299, -3.9701) -> (37.9299, -3.9701)
  line L37 (4.1713, -3.9701) -> (4.1713, -0.3538) projected
  line L38 (4.1713, -3.9701) -> (3.9713, -3.9701)
  line L39 (-0.3124, 4.1299) -> (-3.9701, 4.1299) projected
  line L40 (-3.9701, 4.1299) -> (-3.9701, 3.9299)
  line L41 (4.1299, 45.8299) -> (3.9299, 45.8299)
  line L42 (-3.9701, 37.7299) -> (-3.9701, 37.9299)
  line L43 (42.1723, 37.7299) -> (45.8299, 37.7299) projected
  line L44 (45.8299, 37.7299) -> (45.8299, 37.9299)
  line L45 (37.7299, 45.8299) -> (37.7299, 42.1723) projected
  line L46 (37.7299, 45.8299) -> (37.9299, 45.8299)
  point P0 (0, 0)
  dimension "d78" = 0.2
extrude "Extrusion11" add sketch "Sketch14" against normal up to surface (5 mm away)
sketch "Sketch11" plane through (0, 0, 43) normal (0, 0, 1) x (1, 0, 0)
  line L0 (-7.911, 45.8299) -> (-19.2247, 45.8299) projected
  line L1 (-19.2247, 45.8299) -> (-45.8299, 19.2247) projected
  line L2 (-45.8299, 19.2247) -> (-45.8299, 7.911) projected
  line L3 (-45.8299, 7.911) -> (-7.911, 45.8299) projected
  line L4 (-45.8299, 37.7299) -> (-45.8299, 19.2247) projected
  line L5 (-42.1723, 37.7299) -> (-45.8299, 37.7299) projected
  line L6 (-37.7299, 42.1723) -> (-42.1723, 37.7299) projected
  line L7 (-37.7299, 45.8299) -> (-37.7299, 42.1723) projected
  line L8 (-29.3463, 45.8299) -> (-37.7299, 45.8299) projected
  line L9 (-29.3463, 45.8299) -> (-19.2247, 45.8299) projected
  line L10 (-4.1299, 45.8299) -> (-7.911, 45.8299) projected
  line L11 (-4.1299, 42.1723) -> (-4.1299, 45.8299) projected
  line L12 (0.3124, 37.7299) -> (-4.1299, 42.1723) projected
  line L13 (3.9701, 37.7299) -> (0.3124, 37.7299) projected
  line L14 (3.9701, 29.8965) -> (3.9701, 11.9633) projected
  line L15 (3.9701, 29.8965) -> (3.9701, 37.7299) projected
  line L16 (-11.9633, -3.9701) -> (-4.1713, -3.9701) projected
  line L17 (-4.1713, -3.9701) -> (-4.1713, -0.3538) projected
  line L18 (-4.1713, -0.3538) -> (0.3124, 4.1299) projected
  line L19 (0.3124, 4.1299) -> (3.9701, 4.1299) projected
  line L20 (3.9701, 4.1299) -> (3.9701, 11.9633) projected
  line L21 (-11.9633, -3.9701) -> (-29.8965, -3.9701) projected
  line L22 (-37.7299, -3.9701) -> (-29.8965, -3.9701) projected
  line L23 (-37.7299, -0.3538) -> (-37.7299, -3.9701) projected
  line L24 (-45.8299, 7.911) -> (-7.911, 45.8299) projected
  line L25 (-45.8299, 7.911) -> (-7.911, 45.8299)
  line L26 (-45.8299, 7.911) -> (-45.8299, 4.1299) projected
  line L27 (-45.8299, 4.1299) -> (-42.1723, 4.1299) projected
  line L28 (-37.6885, -0.3538) -> (-37.7299, -0.3538) projected
  line L29 (-42.1723, 4.1299) -> (-37.6885, -0.3538) projected
  point P0 (0, 0)
sketch "Sketch12" plane through (-45.8299, 19.2247, 10) normal (-0.7071068, 0.7071068, 0) x (-0.7071068, -0.7071068, 0)
  line L0 (-45.6254, 33) -> (-45.6254, 0) projected
  line L1 (8, 0) -> (8, 33) projected
  line L2 (-45.6254, 0) -> (8, 0)
  line L3 (8, 0) -> (8, 4)
  line L4 (8, 4) -> (-45.6254, 4)
  line L5 (-45.6254, 4) -> (-45.6254, 0)
  point P0 (-18.8127, -10)
  point P1 (45.6254, -4)
  point P2 (45.6254, -5)
  point P3 (-8, -5)
  point P4 (-8, -4)
  dimension "d73" = 4
properties part number "20_Cube_Insert_Kinematic_Mirrormount_45_base_part1"
